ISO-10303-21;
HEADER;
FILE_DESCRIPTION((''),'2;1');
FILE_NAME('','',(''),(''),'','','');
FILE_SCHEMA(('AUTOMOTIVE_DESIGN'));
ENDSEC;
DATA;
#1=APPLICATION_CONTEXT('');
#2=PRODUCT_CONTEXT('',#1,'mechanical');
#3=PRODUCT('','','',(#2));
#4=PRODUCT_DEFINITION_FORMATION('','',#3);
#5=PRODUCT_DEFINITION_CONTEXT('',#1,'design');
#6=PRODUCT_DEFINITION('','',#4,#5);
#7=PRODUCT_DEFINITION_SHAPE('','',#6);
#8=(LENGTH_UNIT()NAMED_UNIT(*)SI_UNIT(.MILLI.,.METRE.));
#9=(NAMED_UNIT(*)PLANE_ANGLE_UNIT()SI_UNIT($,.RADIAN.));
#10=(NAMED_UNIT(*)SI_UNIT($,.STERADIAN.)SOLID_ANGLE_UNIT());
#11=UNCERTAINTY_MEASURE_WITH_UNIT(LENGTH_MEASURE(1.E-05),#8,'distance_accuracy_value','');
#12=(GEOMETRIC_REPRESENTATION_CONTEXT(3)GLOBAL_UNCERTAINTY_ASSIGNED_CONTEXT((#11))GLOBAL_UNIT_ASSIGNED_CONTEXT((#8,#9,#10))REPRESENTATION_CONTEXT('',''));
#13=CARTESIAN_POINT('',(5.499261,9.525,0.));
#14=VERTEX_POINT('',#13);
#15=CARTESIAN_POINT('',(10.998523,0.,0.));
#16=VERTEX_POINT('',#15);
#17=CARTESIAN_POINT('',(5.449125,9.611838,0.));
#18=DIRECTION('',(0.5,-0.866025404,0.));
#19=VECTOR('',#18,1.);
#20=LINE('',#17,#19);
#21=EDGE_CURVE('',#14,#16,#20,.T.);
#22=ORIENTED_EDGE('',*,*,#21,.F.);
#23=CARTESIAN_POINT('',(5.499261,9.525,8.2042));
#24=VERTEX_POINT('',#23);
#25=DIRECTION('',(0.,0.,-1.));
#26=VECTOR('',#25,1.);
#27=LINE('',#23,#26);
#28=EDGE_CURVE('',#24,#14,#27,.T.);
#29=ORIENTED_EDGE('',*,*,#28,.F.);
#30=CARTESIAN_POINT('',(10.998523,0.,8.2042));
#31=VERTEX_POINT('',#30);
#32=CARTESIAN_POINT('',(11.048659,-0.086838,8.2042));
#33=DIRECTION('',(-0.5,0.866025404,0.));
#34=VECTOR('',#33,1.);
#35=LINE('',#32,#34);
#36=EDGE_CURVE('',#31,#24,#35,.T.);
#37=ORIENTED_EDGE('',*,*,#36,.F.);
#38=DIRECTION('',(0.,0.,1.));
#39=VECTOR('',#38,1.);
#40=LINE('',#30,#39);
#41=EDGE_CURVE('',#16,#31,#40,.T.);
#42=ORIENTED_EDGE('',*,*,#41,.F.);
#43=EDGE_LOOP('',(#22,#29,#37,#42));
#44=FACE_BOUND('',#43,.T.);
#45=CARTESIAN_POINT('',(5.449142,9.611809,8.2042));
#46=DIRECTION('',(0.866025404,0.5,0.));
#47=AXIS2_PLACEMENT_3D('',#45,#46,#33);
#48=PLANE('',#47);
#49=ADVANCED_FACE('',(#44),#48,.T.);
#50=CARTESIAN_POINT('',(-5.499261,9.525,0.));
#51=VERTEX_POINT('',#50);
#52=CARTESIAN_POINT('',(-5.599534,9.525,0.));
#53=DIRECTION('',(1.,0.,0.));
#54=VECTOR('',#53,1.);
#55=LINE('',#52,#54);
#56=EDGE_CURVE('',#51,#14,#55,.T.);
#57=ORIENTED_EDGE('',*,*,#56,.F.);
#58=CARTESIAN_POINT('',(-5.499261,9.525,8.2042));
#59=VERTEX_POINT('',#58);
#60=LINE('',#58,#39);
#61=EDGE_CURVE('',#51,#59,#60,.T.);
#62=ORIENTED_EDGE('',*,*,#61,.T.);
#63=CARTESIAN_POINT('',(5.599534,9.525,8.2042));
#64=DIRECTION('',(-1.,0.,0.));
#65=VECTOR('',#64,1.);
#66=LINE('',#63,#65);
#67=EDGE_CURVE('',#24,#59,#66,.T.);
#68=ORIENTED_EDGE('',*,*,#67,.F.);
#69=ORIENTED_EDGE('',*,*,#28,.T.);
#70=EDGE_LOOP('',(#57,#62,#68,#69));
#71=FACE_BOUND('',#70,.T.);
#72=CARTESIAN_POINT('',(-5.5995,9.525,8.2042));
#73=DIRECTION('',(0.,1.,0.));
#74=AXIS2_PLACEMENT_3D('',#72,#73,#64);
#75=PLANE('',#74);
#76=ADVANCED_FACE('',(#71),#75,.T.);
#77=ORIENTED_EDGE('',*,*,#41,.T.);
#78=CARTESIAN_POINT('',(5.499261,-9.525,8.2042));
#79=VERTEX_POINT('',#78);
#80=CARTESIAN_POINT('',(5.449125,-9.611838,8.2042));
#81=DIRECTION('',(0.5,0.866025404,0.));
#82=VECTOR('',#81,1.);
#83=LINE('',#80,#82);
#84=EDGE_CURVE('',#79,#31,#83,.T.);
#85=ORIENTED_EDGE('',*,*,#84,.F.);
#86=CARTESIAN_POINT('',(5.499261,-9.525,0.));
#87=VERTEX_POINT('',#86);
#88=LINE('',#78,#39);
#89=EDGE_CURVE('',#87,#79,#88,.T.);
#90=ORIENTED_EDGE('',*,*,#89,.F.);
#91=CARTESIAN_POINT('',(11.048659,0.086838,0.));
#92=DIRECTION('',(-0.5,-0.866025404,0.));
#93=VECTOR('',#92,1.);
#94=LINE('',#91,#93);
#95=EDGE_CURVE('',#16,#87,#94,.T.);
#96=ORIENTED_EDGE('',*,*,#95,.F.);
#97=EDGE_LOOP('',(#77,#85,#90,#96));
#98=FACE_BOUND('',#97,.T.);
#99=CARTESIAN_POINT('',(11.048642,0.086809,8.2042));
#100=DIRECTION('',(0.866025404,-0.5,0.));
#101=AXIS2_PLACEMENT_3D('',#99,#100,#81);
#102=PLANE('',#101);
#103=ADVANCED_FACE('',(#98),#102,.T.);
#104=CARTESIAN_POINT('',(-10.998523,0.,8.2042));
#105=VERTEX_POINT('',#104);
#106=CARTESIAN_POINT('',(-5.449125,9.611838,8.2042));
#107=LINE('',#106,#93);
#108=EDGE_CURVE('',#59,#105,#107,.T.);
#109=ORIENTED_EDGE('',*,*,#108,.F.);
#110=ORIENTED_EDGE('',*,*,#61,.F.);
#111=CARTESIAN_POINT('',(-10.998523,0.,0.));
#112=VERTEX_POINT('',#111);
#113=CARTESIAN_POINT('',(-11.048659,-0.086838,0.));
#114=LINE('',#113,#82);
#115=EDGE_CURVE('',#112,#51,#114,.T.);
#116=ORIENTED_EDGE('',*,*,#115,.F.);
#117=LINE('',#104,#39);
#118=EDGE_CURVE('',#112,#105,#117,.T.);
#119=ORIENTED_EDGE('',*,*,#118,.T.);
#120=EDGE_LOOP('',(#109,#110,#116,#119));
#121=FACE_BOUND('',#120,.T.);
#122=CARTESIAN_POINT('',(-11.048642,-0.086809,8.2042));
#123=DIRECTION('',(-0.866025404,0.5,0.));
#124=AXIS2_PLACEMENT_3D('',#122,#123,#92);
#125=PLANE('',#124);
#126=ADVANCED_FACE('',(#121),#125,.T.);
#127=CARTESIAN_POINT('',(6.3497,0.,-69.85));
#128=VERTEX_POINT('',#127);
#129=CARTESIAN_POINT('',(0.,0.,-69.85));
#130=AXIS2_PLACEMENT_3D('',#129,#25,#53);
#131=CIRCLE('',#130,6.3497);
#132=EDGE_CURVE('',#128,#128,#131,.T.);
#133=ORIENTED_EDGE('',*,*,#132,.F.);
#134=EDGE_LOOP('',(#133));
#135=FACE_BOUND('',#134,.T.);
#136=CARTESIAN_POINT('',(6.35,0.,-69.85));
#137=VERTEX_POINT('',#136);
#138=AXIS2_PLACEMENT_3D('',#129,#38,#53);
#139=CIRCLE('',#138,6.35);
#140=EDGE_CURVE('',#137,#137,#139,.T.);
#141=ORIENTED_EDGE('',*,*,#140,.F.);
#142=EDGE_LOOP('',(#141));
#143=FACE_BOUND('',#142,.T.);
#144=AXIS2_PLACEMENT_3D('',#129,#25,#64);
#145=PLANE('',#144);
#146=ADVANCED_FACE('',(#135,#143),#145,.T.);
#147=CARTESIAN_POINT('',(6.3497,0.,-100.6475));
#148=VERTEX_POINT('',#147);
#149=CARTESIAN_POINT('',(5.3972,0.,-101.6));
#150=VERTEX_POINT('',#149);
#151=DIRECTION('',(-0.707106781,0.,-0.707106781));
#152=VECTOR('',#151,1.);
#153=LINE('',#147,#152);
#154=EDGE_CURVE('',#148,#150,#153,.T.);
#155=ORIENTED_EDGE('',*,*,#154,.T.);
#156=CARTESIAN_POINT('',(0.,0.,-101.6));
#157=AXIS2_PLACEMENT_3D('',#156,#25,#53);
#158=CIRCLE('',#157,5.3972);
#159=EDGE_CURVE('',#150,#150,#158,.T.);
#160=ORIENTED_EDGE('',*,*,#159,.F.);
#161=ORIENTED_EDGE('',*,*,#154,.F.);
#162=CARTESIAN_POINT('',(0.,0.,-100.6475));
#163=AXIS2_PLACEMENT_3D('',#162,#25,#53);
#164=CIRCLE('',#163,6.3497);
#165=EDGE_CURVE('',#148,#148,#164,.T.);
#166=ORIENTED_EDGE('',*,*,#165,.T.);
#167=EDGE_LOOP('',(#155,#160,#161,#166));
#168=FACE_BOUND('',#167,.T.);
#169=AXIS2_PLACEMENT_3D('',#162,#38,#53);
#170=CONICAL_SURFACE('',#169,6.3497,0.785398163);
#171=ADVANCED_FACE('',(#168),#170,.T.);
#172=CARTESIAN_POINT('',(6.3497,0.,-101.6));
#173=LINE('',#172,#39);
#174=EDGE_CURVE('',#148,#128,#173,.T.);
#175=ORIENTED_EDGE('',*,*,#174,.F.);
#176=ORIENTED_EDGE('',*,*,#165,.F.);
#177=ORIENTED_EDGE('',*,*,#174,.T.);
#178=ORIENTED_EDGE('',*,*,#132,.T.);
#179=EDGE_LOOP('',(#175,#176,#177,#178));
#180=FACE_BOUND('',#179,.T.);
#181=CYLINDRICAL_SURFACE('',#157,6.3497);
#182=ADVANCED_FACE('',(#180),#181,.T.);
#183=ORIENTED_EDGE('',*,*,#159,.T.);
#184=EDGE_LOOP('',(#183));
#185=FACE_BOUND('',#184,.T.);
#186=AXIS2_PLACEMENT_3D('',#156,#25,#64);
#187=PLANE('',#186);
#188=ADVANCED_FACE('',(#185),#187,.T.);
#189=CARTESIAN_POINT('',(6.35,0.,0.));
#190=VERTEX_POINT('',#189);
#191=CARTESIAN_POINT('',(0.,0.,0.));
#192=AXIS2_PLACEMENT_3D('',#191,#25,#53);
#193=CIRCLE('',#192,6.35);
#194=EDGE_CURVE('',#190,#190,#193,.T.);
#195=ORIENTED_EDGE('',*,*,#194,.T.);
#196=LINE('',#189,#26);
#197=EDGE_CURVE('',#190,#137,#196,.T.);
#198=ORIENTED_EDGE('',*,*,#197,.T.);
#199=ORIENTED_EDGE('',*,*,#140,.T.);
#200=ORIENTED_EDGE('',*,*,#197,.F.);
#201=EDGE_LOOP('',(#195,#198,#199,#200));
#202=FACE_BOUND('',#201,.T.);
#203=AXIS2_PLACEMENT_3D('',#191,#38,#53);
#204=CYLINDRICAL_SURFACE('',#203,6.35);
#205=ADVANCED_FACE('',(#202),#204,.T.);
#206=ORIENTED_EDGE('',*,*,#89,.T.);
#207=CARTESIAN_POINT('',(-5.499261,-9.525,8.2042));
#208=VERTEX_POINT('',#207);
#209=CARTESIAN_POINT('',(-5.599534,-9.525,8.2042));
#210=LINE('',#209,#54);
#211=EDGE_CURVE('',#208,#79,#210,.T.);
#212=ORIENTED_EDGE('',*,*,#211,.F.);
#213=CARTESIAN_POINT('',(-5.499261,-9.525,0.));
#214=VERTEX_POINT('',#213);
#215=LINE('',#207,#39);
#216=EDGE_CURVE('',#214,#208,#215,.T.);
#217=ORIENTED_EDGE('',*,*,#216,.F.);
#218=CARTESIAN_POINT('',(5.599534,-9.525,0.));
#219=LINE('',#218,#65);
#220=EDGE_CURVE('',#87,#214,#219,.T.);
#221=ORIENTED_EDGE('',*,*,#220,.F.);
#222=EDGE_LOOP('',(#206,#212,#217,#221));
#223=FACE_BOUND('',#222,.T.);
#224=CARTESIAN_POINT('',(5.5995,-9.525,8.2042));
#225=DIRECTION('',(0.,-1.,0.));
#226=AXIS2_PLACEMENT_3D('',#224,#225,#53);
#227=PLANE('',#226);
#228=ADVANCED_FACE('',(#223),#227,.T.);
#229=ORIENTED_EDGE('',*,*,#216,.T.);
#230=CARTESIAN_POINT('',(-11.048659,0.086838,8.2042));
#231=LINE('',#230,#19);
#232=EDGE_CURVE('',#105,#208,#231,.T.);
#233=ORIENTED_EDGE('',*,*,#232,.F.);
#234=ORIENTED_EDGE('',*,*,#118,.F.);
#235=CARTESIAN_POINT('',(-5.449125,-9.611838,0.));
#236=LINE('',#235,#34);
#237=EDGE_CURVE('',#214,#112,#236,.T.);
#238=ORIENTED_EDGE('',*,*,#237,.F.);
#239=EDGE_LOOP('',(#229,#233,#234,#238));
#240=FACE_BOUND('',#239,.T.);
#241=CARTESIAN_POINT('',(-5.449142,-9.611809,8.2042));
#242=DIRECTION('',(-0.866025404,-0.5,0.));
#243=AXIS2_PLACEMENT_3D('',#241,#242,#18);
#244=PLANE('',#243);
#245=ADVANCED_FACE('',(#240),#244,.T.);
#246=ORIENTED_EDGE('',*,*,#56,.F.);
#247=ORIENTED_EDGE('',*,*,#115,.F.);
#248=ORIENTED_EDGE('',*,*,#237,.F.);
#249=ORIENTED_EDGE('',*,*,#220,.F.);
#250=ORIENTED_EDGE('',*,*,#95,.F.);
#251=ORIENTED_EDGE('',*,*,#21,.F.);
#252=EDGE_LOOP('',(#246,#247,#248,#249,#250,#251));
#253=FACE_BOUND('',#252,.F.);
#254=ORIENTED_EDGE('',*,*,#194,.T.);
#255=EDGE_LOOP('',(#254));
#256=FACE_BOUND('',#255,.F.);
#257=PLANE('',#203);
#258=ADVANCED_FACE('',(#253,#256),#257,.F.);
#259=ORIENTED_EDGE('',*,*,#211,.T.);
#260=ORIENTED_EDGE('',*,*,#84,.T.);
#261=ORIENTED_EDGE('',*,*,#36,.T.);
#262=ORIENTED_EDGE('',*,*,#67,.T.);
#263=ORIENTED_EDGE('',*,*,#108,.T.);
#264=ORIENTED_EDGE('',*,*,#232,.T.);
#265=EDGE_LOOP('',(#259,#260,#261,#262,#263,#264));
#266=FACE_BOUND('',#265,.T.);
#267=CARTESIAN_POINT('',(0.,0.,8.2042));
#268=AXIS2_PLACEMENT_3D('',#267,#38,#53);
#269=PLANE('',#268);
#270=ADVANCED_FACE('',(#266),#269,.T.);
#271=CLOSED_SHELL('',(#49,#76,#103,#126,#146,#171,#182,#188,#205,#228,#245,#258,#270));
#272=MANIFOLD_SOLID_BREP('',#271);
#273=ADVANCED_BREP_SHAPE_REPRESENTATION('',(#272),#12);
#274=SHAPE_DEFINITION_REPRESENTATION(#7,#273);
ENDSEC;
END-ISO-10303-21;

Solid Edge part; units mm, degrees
sketch "Sketch1" plane through (0, 0, 0) normal (0, 0, 1) x (1, 0, 0)
  circle A0 centre (0, 0) radius 11.049
  dimension "D1" = 22.098
extrude "Protrusion1" add sketch "Sketch1" along normal blind 8.2042
sketch "Sketch2" plane through (0, 0, 0) normal (0, 0, -1) x (1, 0, 0)
  circle A0 centre (0, 0) radius 6.35
extrude "Protrusion2" add sketch "Sketch2" along normal blind 101.6
sketch "Sketch3" plane through (0, 0, -101.6) normal (0, 0, -1) x (1, 0, 0)
  circle A0 centre (0, 0) radius 6.3497
extrude "Cutout1" cut sketch "Sketch3" against normal blind 31.75 flip side to cut
chamfer "Chamfer_1" distance 0.9525 angle 45 1 edges at (-6.3497, 0, -101.6)
sketch "Sketch4" plane through (0, 0, 8.2042) normal (0, 0, 1) x (1, 0, 0)
  line L0 (-5.5995, 9.525) -> (5.5995, 9.525)
  dimension "D1" = 19.05
extrude "Cutout2" cut sketch "Sketch4" against normal up to next material side at (0, 9.575, 8.2042)
pattern_circular "Pattern1" count 6 over 360 about axis through (0, 0, 8.2042) along (0, 0, 1) of "Cutout2"
properties part number "200753"
